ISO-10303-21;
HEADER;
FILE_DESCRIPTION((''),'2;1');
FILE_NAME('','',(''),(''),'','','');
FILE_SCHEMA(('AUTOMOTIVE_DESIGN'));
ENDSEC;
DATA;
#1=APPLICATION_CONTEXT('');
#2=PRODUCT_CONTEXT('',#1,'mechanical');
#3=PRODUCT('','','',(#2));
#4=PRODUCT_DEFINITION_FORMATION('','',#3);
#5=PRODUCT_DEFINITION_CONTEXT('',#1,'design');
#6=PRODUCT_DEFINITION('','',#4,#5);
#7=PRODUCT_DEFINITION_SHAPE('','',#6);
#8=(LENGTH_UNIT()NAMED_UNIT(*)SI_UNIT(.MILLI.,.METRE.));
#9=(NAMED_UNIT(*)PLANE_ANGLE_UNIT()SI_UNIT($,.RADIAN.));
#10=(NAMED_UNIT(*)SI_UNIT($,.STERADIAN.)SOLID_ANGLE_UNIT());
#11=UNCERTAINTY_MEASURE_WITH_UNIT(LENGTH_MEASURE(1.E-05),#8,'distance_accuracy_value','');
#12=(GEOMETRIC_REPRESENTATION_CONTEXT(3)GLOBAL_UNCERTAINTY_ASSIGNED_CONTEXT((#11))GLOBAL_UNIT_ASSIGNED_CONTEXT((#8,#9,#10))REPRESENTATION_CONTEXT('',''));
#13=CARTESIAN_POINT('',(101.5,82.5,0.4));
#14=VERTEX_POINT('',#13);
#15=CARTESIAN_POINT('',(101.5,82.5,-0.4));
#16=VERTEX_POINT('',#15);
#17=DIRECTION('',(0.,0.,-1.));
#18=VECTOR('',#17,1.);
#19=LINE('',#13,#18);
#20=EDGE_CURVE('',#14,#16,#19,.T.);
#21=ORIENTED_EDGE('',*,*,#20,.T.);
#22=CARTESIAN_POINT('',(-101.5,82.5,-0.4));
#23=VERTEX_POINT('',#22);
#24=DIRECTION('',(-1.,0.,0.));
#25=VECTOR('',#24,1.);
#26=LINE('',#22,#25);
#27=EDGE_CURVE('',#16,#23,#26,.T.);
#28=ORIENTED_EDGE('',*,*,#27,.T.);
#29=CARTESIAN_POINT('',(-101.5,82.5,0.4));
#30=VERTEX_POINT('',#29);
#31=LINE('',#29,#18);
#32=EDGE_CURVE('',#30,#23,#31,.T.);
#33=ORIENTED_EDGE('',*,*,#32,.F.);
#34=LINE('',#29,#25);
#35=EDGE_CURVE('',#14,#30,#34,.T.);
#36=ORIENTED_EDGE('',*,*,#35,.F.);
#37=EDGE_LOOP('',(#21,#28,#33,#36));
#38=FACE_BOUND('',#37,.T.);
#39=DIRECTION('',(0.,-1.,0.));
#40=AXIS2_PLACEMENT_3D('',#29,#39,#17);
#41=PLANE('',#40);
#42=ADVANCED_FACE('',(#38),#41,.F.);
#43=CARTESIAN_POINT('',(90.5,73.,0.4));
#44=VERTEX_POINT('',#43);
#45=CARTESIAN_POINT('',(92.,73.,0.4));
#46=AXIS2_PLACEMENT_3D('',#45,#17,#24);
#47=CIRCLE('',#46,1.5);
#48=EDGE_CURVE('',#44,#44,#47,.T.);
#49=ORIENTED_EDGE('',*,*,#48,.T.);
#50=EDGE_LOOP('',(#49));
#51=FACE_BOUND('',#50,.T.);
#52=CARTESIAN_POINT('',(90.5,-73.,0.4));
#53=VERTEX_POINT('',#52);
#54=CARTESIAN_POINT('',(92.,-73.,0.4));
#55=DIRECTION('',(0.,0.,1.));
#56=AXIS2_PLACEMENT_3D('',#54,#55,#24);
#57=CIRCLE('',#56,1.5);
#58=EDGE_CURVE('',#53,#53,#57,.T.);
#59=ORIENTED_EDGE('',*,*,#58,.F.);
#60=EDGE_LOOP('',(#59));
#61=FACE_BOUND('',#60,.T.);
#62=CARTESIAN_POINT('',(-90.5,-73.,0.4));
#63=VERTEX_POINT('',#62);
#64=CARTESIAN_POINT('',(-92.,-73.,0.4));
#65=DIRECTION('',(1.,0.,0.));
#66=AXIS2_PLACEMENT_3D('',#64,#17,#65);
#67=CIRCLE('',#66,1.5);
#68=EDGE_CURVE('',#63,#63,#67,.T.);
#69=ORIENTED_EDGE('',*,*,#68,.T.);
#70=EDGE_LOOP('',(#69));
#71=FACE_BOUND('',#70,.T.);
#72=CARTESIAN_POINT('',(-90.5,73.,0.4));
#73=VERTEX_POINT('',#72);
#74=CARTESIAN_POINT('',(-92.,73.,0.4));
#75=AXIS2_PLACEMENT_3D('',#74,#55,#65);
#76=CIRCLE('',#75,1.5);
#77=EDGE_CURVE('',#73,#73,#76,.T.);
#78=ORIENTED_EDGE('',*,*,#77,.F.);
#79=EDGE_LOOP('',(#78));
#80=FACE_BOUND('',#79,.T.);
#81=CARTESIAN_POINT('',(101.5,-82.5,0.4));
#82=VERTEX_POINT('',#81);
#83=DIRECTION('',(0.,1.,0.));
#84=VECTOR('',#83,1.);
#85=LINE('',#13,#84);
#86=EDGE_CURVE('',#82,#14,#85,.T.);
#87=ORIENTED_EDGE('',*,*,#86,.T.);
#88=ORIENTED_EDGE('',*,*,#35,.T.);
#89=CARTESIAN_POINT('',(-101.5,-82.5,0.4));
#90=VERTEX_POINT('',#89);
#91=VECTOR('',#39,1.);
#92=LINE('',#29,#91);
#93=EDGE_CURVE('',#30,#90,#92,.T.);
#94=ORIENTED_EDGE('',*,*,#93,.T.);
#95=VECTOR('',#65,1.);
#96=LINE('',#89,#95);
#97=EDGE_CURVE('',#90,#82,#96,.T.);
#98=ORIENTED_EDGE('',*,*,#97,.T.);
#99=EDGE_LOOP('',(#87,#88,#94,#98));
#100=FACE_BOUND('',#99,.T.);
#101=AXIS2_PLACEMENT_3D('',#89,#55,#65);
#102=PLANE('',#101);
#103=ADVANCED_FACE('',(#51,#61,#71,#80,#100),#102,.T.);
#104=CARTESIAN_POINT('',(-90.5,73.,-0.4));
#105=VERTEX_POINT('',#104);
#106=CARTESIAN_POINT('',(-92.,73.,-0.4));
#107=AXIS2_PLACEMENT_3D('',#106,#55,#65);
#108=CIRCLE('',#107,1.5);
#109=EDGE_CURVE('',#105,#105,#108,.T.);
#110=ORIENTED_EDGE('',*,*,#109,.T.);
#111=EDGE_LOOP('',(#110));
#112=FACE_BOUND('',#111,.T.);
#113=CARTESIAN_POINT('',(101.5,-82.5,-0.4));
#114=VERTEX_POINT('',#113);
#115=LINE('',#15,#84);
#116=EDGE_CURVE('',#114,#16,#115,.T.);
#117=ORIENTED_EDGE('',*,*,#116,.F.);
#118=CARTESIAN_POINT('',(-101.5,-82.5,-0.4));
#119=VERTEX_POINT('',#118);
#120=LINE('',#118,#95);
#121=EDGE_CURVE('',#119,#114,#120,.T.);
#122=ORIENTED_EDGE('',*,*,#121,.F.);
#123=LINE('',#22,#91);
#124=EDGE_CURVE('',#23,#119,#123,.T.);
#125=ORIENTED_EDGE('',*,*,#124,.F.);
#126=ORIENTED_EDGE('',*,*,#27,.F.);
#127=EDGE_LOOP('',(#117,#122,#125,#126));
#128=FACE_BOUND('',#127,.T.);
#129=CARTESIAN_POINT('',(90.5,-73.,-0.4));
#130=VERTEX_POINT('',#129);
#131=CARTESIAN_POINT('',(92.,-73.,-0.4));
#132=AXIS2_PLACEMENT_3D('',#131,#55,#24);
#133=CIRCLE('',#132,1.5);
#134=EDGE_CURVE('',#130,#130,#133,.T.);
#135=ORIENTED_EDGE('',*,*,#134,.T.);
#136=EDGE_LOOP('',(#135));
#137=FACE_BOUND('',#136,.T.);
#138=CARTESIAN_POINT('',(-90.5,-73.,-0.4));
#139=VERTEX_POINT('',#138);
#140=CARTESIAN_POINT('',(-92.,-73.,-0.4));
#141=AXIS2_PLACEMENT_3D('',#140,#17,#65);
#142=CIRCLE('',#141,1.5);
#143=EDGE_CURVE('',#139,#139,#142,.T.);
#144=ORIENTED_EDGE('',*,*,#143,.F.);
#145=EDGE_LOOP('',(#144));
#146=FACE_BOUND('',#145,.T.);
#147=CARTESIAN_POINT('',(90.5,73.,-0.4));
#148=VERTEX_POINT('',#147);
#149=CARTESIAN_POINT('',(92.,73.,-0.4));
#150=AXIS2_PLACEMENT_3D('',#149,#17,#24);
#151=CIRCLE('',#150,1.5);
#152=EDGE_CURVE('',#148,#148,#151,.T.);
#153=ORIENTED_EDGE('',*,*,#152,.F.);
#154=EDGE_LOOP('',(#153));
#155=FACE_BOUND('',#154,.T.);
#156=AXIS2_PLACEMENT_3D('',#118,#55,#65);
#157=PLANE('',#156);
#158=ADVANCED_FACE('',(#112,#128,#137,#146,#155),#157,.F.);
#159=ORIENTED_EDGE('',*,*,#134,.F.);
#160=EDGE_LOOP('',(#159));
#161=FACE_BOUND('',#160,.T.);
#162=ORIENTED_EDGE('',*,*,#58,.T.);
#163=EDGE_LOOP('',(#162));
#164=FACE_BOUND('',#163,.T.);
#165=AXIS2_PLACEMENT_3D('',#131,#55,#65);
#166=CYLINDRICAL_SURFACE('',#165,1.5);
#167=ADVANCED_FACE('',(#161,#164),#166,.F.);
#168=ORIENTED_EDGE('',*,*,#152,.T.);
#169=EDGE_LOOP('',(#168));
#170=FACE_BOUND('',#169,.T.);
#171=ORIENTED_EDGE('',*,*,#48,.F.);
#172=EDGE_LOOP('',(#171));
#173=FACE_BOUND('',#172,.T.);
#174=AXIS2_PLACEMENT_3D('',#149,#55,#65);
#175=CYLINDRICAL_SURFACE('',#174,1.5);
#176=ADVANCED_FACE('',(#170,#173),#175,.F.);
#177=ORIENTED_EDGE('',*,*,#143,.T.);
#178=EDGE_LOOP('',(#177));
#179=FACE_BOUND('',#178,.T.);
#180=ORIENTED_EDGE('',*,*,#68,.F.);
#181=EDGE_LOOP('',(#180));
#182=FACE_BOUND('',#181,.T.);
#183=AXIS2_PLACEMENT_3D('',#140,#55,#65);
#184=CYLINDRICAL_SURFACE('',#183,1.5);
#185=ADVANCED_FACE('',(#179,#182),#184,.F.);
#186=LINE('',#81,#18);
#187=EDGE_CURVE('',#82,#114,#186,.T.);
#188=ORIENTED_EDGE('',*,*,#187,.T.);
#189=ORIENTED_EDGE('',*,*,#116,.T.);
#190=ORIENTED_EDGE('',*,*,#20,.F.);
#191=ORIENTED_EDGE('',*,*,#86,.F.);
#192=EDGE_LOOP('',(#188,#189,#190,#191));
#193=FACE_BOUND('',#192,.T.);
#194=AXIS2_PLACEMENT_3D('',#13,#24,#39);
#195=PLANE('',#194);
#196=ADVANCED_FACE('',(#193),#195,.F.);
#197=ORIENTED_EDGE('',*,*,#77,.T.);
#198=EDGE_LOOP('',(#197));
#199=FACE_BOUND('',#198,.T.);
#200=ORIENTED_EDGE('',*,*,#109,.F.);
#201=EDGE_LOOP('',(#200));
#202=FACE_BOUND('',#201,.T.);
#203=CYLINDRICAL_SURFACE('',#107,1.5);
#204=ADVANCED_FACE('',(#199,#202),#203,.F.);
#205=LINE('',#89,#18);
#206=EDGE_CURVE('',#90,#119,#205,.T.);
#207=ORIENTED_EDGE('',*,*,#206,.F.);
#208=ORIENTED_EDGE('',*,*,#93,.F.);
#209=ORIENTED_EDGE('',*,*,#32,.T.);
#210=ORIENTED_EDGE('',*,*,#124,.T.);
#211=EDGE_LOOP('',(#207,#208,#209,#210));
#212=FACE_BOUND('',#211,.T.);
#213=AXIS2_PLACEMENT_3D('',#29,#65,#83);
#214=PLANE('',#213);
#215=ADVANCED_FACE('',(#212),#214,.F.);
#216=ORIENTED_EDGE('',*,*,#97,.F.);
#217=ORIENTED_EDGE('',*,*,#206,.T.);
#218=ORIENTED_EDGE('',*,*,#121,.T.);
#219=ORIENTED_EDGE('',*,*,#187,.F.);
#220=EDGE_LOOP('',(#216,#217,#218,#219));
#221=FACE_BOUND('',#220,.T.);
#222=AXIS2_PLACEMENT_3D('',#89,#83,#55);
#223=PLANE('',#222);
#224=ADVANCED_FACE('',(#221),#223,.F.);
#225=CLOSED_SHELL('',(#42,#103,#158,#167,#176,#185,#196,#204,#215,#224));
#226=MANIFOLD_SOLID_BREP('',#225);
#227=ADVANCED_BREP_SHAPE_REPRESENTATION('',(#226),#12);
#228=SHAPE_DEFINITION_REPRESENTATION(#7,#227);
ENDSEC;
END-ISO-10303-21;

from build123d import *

# Parameters (mm, degrees)
SKETCH1_W               = 203
SKETCH1_H               = 165
BASE_EXTRUDE_DEPTH      = 0.4
HOLE1_START             = -0.4
HOLE1_OUTLINE_R         = 1.5
HOLE1_DEPTH             = 0.8
MIRROR2_START           = -0.4
MIRROR2_COPY_1_SKETCH_R = 1.5
MIRROR2_COPY_1_DEPTH    = 0.8


# Read off the part's stored shape, not the designer's step: Hole1
with BuildPart() as part:
    # Sketch1 → Base-Extrude (new, symmetric)
    with BuildSketch(Plane.XY):
        Rectangle(SKETCH1_W, SKETCH1_H)
    extrude(amount=BASE_EXTRUDE_DEPTH, both=True)

    # Hole1 outline → Hole1 (cut)
    with BuildSketch(Plane.XY.offset(HOLE1_START)):
        with Locations((-92, 73)):
            Circle(HOLE1_OUTLINE_R)
    hole1 = extrude(amount=HOLE1_DEPTH, mode=Mode.SUBTRACT)

    # Mirror1: Hole1 across plane
    add(hole1.mirror(Plane.ZX), mode=Mode.SUBTRACT)

    # Mirror2: Hole1 across plane
    add(hole1.mirror(Plane(origin=(0, 0, 0), x_dir=(0, 0, 1), z_dir=(1, 0, 0))), mode=Mode.SUBTRACT)

    # Mirror2 copy 1 sketch → Mirror2 copy 1 (cut)
    with BuildSketch(Plane(origin=(0, 0, 0), x_dir=(-1, 0, 0), z_dir=(0, 0, 1)).offset(MIRROR2_START)):
        with Locations((-92, 73)):
            Circle(MIRROR2_COPY_1_SKETCH_R)
    extrude(amount=MIRROR2_COPY_1_DEPTH, mode=Mode.SUBTRACT)


solid = part.part
